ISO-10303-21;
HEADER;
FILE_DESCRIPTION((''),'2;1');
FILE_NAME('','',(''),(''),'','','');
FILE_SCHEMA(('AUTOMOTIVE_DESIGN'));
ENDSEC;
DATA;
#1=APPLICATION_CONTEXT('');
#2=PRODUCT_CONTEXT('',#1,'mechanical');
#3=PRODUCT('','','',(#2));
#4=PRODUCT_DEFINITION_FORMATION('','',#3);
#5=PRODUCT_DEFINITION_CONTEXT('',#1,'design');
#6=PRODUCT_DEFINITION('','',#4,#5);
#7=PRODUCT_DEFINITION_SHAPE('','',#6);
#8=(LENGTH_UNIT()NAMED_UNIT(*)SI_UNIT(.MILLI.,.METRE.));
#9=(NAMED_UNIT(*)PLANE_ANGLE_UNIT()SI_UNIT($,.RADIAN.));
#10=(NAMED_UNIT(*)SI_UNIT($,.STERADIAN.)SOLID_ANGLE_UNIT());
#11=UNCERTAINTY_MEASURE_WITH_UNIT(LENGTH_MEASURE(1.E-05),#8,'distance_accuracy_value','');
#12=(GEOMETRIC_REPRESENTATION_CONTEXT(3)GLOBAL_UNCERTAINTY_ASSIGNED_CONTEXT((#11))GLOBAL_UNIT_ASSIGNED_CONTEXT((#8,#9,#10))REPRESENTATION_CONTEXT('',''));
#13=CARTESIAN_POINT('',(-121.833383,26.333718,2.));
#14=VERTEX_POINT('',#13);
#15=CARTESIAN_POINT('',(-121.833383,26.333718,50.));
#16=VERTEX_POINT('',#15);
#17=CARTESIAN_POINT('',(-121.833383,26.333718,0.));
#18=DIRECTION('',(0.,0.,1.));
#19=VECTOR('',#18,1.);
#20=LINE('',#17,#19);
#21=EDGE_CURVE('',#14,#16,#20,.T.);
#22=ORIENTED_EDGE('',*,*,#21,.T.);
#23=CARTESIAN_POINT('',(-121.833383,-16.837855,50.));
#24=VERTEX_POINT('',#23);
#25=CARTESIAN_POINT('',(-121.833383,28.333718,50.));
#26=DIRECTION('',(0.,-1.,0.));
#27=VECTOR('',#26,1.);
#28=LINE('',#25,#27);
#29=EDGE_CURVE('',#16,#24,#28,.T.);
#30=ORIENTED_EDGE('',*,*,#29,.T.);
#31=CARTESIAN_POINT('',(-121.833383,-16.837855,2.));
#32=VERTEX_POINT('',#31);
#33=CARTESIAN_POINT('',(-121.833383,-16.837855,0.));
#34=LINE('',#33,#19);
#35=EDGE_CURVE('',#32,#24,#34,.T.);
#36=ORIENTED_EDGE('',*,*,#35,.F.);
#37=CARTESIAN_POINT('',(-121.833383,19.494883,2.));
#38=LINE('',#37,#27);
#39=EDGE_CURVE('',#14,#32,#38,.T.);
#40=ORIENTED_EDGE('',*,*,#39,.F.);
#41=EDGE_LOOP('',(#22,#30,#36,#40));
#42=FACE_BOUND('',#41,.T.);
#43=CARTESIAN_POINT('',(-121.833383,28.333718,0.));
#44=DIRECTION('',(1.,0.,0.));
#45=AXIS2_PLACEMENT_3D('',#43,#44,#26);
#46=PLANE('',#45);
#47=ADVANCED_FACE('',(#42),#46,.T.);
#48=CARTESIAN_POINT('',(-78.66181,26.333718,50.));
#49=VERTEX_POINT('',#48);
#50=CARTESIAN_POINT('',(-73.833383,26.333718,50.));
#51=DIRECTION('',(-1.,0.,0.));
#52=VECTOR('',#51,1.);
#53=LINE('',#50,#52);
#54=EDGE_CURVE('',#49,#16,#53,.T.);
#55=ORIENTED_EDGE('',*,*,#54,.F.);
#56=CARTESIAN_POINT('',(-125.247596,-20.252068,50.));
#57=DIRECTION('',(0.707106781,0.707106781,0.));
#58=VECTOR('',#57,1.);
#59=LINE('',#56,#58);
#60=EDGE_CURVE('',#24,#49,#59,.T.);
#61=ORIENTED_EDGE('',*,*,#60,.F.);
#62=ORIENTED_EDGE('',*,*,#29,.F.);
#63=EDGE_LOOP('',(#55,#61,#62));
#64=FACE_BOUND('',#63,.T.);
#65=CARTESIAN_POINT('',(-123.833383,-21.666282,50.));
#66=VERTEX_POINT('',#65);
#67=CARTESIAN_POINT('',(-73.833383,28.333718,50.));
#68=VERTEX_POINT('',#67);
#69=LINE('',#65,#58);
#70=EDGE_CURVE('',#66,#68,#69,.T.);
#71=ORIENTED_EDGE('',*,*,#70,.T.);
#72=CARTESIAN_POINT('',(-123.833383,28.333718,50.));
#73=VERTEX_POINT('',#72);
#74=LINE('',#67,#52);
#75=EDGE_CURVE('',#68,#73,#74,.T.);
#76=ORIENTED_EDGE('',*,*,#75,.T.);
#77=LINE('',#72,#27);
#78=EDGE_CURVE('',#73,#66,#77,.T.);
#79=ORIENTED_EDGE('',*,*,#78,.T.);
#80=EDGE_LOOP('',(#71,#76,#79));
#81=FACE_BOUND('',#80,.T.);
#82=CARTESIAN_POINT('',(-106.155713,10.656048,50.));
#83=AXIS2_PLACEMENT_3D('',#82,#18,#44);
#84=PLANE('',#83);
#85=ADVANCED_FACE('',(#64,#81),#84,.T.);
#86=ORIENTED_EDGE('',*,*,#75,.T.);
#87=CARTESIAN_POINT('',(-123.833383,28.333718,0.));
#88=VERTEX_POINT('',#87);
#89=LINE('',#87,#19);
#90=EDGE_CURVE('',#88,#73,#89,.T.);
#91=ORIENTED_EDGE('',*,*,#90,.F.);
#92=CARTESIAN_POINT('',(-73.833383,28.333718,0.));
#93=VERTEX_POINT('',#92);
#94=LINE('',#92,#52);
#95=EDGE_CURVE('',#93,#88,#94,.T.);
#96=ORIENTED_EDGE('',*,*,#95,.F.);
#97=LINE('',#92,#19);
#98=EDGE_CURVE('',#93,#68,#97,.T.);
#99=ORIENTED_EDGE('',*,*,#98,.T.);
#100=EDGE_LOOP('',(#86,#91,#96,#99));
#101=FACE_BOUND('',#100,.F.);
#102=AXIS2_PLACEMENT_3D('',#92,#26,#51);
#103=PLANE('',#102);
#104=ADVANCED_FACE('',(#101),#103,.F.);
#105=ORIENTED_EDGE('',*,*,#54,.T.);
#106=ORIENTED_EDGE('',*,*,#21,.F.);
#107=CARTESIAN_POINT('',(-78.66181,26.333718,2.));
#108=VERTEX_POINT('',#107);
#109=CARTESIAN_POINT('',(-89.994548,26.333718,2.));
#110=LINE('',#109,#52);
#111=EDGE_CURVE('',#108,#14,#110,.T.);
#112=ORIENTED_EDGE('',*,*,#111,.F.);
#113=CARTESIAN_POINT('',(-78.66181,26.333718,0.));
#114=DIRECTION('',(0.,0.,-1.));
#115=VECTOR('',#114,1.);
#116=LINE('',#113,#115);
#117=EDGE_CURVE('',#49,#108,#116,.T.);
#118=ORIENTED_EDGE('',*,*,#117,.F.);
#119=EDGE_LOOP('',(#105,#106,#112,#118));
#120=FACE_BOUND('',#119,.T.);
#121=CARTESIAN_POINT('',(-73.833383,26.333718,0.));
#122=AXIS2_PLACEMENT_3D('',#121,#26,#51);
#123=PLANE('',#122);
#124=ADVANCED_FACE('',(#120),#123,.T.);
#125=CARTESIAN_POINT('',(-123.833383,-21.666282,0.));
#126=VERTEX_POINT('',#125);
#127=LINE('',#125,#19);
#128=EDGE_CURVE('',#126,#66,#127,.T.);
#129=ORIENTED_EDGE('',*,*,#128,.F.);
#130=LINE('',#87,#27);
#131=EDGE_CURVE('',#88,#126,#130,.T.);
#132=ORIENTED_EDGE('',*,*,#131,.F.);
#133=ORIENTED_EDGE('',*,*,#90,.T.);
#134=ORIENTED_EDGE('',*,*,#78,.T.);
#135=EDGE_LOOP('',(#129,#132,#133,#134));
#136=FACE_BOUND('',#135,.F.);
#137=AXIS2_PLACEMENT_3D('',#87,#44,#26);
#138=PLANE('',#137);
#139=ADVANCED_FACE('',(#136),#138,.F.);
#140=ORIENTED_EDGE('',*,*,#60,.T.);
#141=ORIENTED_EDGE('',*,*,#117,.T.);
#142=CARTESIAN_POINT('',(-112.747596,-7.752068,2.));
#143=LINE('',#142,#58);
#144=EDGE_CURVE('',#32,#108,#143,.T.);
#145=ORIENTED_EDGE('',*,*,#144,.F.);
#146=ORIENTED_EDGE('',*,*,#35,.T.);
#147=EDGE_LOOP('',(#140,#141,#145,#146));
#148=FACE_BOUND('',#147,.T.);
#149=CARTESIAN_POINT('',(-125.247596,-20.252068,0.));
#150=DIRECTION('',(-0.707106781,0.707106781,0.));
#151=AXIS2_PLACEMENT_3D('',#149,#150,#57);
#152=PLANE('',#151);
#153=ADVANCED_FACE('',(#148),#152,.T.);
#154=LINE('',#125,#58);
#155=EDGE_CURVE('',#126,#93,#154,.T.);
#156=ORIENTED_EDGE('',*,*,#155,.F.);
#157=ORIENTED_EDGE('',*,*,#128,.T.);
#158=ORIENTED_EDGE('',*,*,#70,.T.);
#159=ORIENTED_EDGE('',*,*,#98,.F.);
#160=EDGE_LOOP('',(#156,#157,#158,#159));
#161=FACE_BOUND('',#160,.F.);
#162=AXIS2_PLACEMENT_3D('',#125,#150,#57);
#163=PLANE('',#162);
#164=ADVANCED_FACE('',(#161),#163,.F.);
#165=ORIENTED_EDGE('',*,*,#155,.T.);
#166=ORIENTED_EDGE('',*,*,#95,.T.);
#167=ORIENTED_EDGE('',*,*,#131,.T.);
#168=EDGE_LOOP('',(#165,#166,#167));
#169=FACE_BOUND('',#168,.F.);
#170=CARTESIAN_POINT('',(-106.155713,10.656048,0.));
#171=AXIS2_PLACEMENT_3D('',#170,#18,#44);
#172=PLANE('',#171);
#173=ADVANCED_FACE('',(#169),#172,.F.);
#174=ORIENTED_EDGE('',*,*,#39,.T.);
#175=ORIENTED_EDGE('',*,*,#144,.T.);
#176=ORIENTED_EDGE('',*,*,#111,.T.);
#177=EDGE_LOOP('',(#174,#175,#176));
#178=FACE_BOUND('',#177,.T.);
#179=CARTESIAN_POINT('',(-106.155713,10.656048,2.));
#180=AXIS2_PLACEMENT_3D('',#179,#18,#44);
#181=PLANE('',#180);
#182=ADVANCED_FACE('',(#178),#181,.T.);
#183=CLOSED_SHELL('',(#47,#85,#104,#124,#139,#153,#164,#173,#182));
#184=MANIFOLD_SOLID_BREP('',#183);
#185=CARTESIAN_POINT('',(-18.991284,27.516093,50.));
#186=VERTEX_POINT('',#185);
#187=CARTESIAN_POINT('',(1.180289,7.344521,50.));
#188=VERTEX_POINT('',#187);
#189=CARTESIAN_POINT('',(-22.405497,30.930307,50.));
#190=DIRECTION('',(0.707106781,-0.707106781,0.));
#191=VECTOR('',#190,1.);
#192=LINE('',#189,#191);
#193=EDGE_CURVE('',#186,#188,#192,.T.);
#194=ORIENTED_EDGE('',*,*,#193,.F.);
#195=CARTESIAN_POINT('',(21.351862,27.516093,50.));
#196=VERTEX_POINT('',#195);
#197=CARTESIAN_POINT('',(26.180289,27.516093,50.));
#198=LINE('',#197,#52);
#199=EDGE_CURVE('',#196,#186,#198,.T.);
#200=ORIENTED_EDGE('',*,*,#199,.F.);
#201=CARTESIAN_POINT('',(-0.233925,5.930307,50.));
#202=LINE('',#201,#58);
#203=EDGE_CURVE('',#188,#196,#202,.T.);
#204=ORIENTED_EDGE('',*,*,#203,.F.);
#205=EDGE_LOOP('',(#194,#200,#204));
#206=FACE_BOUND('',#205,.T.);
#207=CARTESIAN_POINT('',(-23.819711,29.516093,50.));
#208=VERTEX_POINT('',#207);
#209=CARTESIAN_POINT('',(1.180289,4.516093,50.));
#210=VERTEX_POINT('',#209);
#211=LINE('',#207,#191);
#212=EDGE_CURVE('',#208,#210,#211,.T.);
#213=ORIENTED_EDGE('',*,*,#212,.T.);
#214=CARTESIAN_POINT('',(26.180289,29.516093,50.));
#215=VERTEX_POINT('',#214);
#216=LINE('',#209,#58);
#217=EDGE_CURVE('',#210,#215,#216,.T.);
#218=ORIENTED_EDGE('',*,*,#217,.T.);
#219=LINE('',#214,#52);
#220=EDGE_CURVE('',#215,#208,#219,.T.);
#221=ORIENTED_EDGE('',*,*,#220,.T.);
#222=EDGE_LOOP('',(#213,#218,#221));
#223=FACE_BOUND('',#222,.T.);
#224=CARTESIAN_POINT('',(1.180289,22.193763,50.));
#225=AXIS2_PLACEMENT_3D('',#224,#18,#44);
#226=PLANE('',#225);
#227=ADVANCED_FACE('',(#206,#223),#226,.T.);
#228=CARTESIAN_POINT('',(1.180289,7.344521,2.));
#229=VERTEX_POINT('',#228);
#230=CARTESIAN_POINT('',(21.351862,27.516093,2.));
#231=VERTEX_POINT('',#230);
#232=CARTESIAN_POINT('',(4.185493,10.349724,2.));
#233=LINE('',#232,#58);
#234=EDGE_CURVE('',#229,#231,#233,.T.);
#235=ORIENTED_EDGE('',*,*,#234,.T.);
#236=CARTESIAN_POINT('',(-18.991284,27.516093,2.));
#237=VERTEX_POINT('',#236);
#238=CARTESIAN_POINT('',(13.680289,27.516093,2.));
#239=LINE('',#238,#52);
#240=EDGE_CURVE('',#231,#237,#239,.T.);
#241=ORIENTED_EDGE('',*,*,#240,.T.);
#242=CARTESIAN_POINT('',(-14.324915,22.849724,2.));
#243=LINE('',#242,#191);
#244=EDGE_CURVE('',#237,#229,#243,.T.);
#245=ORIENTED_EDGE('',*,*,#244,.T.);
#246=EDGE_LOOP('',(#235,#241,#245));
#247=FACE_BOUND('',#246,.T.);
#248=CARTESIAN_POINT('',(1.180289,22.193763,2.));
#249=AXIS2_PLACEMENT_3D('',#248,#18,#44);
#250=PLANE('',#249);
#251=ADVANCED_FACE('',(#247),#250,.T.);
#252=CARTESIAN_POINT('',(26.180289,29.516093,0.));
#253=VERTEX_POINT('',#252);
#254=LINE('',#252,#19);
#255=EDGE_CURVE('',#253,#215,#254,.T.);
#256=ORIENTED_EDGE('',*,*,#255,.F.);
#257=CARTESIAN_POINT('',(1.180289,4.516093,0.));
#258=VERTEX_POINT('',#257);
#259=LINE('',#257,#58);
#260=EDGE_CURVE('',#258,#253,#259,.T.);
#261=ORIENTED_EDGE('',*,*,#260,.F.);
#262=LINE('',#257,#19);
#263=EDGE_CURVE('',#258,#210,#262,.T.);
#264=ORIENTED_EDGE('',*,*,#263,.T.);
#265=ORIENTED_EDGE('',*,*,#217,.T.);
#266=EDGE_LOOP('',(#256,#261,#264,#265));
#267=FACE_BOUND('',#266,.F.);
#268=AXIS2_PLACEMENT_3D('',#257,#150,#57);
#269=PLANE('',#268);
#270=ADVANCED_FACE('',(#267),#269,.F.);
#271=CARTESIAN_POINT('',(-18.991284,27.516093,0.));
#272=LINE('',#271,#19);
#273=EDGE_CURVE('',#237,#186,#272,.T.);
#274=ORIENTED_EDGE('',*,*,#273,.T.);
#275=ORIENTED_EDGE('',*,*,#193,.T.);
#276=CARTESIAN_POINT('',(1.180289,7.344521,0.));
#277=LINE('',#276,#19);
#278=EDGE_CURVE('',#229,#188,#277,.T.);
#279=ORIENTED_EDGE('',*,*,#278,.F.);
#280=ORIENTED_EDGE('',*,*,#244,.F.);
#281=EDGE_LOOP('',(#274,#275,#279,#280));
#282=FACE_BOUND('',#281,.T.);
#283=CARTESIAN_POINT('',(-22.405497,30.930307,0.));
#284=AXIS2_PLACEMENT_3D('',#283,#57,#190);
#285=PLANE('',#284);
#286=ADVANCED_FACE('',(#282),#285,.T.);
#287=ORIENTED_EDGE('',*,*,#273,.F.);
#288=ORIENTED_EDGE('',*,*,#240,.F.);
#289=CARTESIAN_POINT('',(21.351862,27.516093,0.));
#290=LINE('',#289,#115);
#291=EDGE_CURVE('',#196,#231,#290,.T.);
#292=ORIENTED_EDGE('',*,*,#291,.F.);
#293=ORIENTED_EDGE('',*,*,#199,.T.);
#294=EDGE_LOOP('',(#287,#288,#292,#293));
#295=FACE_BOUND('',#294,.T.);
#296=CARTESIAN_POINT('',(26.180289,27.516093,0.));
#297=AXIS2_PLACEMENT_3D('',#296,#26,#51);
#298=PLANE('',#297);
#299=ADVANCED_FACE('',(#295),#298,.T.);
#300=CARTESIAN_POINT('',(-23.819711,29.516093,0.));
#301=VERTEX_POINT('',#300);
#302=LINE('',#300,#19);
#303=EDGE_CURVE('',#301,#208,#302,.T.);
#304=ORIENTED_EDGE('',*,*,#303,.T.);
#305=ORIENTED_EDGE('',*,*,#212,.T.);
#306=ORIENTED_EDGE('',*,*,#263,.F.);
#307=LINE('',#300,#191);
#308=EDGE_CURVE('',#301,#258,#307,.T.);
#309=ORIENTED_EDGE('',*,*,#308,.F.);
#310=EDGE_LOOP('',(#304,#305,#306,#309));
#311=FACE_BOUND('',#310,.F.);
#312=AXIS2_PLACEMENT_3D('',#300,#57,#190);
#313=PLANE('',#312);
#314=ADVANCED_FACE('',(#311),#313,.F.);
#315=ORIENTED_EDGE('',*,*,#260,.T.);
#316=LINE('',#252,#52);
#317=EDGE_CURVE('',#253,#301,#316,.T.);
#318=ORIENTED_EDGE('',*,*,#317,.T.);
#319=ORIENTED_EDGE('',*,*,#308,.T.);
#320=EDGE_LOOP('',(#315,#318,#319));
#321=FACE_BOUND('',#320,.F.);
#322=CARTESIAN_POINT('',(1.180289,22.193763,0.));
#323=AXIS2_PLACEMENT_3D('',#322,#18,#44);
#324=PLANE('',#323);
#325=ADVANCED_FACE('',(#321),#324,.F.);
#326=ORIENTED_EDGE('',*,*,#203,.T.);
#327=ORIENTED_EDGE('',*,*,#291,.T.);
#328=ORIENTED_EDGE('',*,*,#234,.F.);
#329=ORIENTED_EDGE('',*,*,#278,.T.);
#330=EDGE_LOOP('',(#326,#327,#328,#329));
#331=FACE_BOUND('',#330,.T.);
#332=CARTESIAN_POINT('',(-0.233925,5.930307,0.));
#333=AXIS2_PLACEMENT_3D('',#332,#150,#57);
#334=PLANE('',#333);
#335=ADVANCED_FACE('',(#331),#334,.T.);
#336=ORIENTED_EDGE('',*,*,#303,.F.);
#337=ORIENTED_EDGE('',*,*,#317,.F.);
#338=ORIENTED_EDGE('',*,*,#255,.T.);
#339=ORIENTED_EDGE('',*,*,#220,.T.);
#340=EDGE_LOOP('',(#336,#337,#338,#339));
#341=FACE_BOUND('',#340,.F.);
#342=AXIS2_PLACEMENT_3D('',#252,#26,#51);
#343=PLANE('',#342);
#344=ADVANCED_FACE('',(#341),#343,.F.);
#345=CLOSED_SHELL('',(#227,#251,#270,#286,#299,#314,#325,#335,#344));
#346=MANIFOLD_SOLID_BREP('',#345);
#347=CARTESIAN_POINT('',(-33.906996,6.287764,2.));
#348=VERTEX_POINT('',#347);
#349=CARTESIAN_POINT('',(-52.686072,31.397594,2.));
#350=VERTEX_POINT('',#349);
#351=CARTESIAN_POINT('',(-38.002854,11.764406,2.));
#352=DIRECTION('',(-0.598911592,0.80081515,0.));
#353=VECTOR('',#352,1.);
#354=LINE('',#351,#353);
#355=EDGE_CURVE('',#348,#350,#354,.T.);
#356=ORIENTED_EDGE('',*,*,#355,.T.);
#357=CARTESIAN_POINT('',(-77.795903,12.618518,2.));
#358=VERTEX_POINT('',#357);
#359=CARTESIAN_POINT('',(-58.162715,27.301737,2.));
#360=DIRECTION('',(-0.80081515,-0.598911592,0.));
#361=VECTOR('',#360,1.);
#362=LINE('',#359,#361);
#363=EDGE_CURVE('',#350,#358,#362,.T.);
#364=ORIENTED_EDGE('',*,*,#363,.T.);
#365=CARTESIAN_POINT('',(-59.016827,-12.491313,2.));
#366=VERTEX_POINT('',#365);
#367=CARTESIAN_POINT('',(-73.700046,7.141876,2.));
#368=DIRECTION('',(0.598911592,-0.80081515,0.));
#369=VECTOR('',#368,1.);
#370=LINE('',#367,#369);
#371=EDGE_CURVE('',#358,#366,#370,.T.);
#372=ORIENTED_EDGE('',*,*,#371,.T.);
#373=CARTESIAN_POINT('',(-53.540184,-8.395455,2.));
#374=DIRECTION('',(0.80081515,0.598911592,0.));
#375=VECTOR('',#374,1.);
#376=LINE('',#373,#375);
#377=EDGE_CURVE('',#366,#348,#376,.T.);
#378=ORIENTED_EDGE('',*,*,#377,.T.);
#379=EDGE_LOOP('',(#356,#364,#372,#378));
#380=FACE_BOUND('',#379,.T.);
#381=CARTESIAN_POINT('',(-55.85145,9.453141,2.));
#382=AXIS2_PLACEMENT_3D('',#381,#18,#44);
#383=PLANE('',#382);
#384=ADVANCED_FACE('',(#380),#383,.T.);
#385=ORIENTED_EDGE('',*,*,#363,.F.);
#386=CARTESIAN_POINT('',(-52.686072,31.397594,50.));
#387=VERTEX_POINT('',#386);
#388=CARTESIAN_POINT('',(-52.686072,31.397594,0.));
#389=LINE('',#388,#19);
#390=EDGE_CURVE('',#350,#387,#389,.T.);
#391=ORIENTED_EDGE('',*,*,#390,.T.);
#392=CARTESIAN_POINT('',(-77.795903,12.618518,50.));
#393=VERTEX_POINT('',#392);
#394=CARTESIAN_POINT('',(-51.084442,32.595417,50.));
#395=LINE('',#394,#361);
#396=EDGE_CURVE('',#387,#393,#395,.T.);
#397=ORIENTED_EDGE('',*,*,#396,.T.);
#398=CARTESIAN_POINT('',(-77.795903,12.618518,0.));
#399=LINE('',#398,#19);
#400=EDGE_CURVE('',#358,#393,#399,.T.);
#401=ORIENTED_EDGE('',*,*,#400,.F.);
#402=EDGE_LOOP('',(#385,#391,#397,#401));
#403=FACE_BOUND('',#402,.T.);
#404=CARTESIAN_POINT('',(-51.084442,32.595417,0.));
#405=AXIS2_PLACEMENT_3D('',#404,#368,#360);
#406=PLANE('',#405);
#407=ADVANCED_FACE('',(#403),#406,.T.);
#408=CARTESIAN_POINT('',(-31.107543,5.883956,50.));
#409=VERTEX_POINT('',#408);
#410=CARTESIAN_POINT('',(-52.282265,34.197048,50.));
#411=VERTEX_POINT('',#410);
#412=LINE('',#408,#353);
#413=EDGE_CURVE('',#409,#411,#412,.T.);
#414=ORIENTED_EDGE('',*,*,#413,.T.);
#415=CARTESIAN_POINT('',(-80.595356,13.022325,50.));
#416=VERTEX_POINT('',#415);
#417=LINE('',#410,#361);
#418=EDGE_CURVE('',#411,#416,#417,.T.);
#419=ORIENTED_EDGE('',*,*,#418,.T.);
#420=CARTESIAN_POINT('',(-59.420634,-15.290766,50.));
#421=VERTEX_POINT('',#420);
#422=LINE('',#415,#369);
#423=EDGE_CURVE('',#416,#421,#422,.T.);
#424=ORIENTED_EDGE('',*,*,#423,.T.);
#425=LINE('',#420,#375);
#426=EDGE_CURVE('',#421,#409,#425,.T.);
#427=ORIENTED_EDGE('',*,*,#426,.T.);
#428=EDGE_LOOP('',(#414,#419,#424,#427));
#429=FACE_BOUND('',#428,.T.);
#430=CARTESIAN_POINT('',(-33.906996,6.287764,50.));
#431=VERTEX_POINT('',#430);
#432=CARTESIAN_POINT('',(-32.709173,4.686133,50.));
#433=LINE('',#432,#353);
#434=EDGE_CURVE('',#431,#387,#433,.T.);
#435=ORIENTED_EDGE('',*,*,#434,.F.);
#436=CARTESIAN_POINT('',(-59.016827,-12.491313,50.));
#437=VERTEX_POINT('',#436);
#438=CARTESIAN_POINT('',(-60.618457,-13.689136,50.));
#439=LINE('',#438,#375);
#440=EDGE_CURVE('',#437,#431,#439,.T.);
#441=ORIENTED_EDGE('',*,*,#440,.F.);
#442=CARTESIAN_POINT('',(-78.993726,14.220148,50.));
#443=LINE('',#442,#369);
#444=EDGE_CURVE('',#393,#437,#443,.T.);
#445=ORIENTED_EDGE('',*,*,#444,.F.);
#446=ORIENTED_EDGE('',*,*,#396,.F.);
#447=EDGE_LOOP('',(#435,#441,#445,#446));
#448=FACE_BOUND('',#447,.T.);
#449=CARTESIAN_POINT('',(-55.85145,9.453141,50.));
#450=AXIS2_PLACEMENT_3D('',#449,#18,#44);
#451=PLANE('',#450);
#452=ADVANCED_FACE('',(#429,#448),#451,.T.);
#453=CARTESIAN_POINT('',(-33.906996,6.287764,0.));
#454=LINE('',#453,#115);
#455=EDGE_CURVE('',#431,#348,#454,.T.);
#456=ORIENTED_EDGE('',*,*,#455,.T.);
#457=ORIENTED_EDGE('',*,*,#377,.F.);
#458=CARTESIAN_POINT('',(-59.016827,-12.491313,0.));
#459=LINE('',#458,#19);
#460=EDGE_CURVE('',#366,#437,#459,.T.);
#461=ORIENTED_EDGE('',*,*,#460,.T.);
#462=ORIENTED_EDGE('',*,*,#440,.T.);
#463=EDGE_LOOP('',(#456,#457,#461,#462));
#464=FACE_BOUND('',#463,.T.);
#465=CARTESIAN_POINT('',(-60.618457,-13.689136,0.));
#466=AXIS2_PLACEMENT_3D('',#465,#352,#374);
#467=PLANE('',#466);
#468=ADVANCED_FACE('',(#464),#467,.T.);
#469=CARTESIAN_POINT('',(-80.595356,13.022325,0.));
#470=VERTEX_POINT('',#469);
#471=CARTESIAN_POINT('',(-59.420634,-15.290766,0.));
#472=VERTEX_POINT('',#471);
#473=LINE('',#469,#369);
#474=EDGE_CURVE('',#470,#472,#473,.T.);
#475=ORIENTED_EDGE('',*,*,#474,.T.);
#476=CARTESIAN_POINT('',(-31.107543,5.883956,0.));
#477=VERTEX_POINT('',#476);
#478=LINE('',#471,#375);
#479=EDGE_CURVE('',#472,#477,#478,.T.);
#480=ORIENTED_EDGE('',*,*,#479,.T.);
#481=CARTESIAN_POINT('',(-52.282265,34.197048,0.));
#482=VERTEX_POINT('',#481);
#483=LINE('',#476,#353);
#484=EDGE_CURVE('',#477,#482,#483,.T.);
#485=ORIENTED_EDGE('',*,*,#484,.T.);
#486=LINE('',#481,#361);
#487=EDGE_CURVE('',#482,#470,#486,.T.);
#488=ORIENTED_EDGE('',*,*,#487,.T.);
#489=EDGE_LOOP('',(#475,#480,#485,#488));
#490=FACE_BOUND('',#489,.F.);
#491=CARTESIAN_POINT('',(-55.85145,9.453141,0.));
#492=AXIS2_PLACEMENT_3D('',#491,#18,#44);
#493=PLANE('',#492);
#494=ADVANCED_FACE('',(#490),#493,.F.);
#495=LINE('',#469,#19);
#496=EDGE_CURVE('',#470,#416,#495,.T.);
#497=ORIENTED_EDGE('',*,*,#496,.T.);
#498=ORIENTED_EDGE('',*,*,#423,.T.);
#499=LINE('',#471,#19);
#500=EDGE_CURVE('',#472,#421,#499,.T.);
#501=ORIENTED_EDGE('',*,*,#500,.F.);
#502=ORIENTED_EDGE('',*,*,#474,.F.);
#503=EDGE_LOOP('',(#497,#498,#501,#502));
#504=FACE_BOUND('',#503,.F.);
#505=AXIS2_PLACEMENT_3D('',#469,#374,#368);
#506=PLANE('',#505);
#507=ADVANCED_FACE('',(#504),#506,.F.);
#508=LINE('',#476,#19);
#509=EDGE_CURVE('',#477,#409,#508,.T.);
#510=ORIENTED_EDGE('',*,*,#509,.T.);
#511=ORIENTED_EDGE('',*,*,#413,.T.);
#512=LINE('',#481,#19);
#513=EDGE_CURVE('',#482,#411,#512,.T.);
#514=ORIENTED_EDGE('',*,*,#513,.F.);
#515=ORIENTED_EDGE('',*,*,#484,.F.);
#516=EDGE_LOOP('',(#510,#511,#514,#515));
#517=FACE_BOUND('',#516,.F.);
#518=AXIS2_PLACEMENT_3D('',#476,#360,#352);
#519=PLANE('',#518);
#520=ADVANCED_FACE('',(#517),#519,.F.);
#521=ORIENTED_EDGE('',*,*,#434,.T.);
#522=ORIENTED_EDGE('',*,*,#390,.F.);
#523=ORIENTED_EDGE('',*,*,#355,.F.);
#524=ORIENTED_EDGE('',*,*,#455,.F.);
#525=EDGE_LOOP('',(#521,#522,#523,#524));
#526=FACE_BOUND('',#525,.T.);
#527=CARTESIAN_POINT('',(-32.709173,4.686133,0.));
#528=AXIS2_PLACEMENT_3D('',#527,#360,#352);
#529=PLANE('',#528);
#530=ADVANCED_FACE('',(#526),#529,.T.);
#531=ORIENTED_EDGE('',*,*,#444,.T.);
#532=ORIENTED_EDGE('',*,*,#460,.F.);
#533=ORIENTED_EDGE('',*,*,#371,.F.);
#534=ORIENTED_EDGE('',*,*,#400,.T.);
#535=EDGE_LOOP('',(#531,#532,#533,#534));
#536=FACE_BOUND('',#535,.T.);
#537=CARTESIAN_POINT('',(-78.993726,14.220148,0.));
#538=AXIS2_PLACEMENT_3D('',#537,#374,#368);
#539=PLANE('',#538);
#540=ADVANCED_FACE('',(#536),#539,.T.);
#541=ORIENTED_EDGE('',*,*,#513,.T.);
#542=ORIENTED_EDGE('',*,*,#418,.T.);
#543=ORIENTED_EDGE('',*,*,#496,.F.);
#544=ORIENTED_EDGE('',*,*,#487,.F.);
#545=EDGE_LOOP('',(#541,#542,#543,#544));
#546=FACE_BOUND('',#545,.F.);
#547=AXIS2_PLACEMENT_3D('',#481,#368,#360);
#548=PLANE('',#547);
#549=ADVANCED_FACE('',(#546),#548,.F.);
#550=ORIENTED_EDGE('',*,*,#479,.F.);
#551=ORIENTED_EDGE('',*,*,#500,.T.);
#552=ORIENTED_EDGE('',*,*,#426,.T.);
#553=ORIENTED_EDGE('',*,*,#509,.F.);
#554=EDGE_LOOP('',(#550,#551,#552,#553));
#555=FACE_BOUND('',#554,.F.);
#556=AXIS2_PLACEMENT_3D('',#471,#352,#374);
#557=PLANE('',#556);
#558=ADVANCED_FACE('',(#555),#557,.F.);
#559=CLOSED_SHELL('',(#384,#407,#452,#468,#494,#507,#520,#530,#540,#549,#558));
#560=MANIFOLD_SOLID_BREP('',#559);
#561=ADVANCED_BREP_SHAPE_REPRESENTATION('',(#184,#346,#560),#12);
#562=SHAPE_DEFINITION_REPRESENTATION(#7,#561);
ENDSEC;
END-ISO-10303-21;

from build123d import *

# Parameters (mm, degrees)
F1_DEPTH = 50
F2_T     = -2
F2_2_T   = -2
F2_3_T   = -2


# Not quite as in the source:
# - a feature names something its author has since deleted; it is built from what else it names


with BuildPart() as f1:
    # F0 (on Top) → F1 (new body)
    with BuildSketch(Plane.XY):
        Polygon((-73.8333829338, 28.3337179901), (-123.8333829338, 28.3337179901), (-123.8333829338, -21.6662820099), align=None)
    extrude(amount=F1_DEPTH)

    # F2#3
    f2_3_openings = [f1.faces().sort_by_distance(p)[0] for p in [
        (-107.166716, 11.667051, 50),
    ]]
    offset(amount=F2_3_T, openings=f2_3_openings)


with BuildPart() as f1b:
    # F0 (on Top) → F1, piece 2 (new body)
    with BuildSketch(Plane.XY):
        Polygon((-31.1075429039, 5.8839563866), (-52.2822653136, 34.1970475437), (-80.5953564708, 13.0223251341), (-59.4206340611, -15.2907660231), align=None)
    extrude(amount=F1_DEPTH)

    # F2#2
    f2_2_openings = [f1b.faces().sort_by_distance(p)[0] for p in [
        (-55.85145, 9.453141, 50),
    ]]
    offset(amount=F2_2_T, openings=f2_2_openings)


with BuildPart() as f1c:
    # F0 (on Top) → F1, piece 3 (new body)
    with BuildSketch(Plane.XY):
        Polygon((26.1802889407, 29.5160934329), (-23.8197110593, 29.5160934329), (1.1802889407, 4.5160934329), align=None)
    extrude(amount=F1_DEPTH)

    # F2
    f2_openings = [f1c.faces().sort_by_distance(p)[0] for p in [
        (1.180289, 21.18276, 50),
    ]]
    offset(amount=F2_T, openings=f2_openings)


solid = Compound([f1.part, f1b.part, f1c.part])
